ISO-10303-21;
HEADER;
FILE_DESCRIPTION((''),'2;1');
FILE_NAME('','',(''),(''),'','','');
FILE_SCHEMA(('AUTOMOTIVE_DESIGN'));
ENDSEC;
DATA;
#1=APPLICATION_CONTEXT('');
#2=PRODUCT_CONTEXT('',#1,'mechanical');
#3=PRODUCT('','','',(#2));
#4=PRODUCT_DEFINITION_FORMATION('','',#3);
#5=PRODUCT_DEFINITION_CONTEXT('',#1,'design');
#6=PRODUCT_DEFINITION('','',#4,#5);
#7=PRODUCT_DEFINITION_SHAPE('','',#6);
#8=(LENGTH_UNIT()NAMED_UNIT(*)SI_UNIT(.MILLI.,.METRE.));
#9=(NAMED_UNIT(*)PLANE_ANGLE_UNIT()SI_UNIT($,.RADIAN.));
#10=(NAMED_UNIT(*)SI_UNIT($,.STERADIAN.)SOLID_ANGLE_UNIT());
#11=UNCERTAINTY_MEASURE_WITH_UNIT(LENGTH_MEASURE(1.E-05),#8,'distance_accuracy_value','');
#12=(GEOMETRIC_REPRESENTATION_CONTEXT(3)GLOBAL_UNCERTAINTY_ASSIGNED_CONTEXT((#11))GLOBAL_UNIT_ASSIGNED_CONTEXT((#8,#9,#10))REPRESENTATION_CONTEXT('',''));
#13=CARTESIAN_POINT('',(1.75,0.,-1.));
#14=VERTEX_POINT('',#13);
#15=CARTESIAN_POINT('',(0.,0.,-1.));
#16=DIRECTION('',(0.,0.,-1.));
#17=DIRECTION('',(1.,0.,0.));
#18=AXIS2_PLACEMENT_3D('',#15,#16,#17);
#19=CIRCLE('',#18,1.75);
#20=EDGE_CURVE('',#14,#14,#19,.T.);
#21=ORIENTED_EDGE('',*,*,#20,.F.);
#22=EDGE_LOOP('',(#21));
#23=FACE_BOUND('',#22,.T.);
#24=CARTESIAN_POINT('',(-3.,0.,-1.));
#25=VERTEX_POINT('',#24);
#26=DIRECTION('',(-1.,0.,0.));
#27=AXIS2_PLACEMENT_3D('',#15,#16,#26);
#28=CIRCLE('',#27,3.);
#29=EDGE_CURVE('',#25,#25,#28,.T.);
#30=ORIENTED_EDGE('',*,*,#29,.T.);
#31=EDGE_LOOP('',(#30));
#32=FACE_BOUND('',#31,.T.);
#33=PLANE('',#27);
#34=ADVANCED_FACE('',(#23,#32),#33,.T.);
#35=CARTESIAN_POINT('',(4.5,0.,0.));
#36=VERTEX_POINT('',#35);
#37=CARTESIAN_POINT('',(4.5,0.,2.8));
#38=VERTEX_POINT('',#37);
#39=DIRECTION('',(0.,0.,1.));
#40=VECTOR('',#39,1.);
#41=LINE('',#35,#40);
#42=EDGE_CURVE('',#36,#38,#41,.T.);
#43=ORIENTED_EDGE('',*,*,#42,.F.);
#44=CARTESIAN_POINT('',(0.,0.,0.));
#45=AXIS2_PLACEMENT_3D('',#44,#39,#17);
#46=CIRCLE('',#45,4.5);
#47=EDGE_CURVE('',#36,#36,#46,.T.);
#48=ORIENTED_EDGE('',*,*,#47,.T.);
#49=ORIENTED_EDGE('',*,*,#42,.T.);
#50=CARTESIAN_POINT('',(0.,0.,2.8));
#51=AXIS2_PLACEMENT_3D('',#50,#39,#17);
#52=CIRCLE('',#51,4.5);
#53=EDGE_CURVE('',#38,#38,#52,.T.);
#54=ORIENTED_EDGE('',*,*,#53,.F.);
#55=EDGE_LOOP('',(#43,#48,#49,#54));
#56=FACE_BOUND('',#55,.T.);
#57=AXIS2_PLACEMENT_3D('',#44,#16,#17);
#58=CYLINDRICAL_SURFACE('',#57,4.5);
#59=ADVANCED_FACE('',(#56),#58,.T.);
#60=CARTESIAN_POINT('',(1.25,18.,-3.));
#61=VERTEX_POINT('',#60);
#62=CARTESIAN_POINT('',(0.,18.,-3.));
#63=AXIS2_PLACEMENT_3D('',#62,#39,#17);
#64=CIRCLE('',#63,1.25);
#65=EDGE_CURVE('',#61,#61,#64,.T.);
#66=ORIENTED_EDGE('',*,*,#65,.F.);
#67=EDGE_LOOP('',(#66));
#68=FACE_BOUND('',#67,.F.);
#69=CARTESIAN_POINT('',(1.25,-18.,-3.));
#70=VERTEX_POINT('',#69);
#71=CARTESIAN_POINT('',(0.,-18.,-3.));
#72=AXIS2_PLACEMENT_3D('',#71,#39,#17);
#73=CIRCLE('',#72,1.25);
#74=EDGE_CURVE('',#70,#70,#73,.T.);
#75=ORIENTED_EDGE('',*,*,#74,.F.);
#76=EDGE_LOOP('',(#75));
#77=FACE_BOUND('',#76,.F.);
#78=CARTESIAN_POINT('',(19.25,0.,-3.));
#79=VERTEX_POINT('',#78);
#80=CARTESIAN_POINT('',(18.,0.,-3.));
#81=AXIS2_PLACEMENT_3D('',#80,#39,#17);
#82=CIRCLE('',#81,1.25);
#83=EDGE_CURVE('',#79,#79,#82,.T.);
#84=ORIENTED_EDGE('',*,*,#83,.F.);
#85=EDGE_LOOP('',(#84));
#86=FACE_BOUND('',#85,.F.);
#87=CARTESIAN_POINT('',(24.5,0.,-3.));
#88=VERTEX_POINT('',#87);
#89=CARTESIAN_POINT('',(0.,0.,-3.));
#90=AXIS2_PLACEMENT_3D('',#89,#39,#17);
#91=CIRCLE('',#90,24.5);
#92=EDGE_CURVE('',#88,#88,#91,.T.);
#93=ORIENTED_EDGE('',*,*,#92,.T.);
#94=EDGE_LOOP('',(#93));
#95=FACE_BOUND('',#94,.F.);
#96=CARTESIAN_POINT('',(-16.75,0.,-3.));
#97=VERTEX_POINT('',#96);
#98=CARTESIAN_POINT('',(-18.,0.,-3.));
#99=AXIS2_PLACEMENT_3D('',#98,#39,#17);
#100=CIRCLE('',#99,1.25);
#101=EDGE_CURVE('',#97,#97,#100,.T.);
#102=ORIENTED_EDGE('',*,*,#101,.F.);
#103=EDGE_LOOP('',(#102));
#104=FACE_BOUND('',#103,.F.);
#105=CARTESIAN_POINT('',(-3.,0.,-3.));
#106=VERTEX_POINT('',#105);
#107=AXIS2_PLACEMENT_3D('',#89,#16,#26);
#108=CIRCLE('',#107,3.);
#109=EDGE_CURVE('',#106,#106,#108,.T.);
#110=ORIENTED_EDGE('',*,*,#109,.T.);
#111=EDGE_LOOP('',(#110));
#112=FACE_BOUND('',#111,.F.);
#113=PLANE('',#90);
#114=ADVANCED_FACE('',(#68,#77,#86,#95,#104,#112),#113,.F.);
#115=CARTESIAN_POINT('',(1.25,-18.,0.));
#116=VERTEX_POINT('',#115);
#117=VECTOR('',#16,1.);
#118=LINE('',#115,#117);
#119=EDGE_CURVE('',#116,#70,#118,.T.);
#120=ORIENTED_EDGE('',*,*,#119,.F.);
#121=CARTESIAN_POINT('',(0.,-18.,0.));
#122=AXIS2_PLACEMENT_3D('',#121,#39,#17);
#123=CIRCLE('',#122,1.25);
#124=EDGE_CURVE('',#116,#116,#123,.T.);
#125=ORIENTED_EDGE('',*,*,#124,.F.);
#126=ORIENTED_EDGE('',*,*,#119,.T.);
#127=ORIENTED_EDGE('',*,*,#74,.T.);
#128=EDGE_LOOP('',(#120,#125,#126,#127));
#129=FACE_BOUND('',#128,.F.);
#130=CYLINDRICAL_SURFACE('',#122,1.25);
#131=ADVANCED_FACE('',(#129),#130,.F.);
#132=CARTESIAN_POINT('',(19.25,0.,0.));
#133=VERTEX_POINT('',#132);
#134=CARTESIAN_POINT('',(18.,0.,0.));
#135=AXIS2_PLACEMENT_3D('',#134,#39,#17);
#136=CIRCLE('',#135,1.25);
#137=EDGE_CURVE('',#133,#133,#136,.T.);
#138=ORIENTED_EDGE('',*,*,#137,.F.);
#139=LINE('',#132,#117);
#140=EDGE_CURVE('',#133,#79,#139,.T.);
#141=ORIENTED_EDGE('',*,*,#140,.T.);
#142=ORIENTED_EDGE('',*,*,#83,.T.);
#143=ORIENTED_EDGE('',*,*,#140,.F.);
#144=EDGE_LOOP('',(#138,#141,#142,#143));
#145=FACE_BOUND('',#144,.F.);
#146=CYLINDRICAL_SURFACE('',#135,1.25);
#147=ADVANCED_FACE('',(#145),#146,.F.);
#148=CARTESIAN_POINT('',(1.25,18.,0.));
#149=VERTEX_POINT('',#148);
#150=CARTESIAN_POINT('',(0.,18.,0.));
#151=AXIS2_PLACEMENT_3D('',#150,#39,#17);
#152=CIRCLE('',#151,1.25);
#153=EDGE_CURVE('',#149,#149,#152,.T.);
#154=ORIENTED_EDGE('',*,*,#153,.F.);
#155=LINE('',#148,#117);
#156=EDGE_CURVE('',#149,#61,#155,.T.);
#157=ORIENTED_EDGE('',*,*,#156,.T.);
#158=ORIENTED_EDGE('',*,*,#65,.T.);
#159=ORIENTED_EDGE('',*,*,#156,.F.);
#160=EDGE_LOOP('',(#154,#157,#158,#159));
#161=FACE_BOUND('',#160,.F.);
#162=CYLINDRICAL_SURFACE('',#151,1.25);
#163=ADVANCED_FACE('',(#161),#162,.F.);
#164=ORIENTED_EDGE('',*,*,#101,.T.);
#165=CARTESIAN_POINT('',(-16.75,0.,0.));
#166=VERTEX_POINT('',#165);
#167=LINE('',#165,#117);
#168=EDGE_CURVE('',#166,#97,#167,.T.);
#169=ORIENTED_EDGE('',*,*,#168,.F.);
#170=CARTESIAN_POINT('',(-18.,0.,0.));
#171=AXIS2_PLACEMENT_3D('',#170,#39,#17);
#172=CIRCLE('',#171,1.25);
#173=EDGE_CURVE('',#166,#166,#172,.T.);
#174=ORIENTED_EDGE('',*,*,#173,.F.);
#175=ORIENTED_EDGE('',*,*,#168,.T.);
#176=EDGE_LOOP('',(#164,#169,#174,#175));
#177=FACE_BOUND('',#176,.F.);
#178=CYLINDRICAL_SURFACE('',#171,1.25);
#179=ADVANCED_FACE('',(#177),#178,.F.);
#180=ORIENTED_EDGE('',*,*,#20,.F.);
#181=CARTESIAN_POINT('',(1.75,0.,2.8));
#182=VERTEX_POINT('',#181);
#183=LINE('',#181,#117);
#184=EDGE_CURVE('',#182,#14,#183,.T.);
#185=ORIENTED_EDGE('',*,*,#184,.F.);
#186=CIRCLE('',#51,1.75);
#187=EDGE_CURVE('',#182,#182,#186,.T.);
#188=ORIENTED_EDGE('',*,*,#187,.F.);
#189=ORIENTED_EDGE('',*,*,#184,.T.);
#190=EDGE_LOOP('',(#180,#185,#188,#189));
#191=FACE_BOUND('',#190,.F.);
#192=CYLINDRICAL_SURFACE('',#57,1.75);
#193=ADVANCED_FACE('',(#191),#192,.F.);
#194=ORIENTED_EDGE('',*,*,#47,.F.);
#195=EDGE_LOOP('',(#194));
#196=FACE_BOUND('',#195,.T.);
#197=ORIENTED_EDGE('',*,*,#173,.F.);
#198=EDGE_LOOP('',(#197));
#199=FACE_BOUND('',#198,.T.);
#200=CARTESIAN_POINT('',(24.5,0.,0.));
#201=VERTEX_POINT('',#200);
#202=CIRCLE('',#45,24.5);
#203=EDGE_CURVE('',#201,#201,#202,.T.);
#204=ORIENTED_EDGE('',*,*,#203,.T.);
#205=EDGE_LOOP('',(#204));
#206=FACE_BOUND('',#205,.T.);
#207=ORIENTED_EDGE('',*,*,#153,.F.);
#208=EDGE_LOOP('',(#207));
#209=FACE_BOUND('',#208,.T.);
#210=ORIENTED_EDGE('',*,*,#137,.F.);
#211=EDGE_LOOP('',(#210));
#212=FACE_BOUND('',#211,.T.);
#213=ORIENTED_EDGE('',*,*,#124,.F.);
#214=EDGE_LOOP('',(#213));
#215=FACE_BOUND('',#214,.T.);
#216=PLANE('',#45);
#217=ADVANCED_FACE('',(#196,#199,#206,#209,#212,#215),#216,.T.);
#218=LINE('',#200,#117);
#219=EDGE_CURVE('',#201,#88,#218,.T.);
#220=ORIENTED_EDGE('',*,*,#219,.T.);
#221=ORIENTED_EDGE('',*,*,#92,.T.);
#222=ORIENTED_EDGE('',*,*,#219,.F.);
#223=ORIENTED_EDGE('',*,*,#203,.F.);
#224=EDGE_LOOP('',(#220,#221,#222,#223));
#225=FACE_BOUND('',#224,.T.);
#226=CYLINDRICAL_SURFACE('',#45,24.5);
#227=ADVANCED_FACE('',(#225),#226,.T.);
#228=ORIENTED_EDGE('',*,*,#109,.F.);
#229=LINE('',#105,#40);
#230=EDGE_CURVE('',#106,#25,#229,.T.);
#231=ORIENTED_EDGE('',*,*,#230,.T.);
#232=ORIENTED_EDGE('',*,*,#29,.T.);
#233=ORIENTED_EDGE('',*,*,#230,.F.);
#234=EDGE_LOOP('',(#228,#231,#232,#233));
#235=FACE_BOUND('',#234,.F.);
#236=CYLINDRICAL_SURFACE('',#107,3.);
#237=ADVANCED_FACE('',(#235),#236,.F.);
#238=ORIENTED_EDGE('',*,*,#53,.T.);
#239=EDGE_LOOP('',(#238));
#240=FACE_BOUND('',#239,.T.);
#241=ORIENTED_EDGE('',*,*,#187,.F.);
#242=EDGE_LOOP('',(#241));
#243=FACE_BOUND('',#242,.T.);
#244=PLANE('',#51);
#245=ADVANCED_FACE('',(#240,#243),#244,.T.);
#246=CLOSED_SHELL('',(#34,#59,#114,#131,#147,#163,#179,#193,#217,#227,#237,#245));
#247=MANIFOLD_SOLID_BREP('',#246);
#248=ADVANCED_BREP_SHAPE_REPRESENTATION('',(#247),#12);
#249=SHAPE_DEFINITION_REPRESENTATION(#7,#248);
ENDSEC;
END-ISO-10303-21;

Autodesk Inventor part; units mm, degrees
ref_plane "YZ Plane" through (0, 0, 0) normal (1, 0, 0) x (0, 1, 0)
ref_plane "XZ Plane" through (0, 0, 0) normal (0, 1, 0) x (-1, 0, 0)
ref_plane "XY Plane" through (0, 0, 0) normal (0, 0, 1) x (1, 0, 0)
sketch "스케치1" plane through (0, 0, 0) normal (0, 0, 1) x (1, 0, 0)
  circle A0 centre (0, 0) radius 24.5
  circle A1 centre (0, 0) radius 4.5
  circle A2 centre (0, 0) radius 1.75
  circle A3 centre (0, 18) radius 1.25
  circle A4 centre (-18, 0) radius 1.25
  circle A5 centre (0, -18) radius 1.25
  circle A6 centre (18, 0) radius 1.25
  dimension "d0" = 49
  dimension "d1" = 9
  dimension "d2" = 3.5
  dimension "d7" = 2.5
  dimension "d8" = 18
  dimension "d11" = 360
extrude "돌출1" add sketch "스케치1" against normal blind 3 contours A0 | A1
extrude "돌출2" add sketch "스케치1" along normal blind 2.8 contours A1
sketch "스케치2" plane through (0, 0, -3) normal (0, 0, -1) x (-1, 0, 0)
  circle A0 centre (0, 0) radius 3
  dimension "d13" = 6
extrude "돌출3" cut sketch "스케치2" against normal blind 2
properties part number "좌측 축"
